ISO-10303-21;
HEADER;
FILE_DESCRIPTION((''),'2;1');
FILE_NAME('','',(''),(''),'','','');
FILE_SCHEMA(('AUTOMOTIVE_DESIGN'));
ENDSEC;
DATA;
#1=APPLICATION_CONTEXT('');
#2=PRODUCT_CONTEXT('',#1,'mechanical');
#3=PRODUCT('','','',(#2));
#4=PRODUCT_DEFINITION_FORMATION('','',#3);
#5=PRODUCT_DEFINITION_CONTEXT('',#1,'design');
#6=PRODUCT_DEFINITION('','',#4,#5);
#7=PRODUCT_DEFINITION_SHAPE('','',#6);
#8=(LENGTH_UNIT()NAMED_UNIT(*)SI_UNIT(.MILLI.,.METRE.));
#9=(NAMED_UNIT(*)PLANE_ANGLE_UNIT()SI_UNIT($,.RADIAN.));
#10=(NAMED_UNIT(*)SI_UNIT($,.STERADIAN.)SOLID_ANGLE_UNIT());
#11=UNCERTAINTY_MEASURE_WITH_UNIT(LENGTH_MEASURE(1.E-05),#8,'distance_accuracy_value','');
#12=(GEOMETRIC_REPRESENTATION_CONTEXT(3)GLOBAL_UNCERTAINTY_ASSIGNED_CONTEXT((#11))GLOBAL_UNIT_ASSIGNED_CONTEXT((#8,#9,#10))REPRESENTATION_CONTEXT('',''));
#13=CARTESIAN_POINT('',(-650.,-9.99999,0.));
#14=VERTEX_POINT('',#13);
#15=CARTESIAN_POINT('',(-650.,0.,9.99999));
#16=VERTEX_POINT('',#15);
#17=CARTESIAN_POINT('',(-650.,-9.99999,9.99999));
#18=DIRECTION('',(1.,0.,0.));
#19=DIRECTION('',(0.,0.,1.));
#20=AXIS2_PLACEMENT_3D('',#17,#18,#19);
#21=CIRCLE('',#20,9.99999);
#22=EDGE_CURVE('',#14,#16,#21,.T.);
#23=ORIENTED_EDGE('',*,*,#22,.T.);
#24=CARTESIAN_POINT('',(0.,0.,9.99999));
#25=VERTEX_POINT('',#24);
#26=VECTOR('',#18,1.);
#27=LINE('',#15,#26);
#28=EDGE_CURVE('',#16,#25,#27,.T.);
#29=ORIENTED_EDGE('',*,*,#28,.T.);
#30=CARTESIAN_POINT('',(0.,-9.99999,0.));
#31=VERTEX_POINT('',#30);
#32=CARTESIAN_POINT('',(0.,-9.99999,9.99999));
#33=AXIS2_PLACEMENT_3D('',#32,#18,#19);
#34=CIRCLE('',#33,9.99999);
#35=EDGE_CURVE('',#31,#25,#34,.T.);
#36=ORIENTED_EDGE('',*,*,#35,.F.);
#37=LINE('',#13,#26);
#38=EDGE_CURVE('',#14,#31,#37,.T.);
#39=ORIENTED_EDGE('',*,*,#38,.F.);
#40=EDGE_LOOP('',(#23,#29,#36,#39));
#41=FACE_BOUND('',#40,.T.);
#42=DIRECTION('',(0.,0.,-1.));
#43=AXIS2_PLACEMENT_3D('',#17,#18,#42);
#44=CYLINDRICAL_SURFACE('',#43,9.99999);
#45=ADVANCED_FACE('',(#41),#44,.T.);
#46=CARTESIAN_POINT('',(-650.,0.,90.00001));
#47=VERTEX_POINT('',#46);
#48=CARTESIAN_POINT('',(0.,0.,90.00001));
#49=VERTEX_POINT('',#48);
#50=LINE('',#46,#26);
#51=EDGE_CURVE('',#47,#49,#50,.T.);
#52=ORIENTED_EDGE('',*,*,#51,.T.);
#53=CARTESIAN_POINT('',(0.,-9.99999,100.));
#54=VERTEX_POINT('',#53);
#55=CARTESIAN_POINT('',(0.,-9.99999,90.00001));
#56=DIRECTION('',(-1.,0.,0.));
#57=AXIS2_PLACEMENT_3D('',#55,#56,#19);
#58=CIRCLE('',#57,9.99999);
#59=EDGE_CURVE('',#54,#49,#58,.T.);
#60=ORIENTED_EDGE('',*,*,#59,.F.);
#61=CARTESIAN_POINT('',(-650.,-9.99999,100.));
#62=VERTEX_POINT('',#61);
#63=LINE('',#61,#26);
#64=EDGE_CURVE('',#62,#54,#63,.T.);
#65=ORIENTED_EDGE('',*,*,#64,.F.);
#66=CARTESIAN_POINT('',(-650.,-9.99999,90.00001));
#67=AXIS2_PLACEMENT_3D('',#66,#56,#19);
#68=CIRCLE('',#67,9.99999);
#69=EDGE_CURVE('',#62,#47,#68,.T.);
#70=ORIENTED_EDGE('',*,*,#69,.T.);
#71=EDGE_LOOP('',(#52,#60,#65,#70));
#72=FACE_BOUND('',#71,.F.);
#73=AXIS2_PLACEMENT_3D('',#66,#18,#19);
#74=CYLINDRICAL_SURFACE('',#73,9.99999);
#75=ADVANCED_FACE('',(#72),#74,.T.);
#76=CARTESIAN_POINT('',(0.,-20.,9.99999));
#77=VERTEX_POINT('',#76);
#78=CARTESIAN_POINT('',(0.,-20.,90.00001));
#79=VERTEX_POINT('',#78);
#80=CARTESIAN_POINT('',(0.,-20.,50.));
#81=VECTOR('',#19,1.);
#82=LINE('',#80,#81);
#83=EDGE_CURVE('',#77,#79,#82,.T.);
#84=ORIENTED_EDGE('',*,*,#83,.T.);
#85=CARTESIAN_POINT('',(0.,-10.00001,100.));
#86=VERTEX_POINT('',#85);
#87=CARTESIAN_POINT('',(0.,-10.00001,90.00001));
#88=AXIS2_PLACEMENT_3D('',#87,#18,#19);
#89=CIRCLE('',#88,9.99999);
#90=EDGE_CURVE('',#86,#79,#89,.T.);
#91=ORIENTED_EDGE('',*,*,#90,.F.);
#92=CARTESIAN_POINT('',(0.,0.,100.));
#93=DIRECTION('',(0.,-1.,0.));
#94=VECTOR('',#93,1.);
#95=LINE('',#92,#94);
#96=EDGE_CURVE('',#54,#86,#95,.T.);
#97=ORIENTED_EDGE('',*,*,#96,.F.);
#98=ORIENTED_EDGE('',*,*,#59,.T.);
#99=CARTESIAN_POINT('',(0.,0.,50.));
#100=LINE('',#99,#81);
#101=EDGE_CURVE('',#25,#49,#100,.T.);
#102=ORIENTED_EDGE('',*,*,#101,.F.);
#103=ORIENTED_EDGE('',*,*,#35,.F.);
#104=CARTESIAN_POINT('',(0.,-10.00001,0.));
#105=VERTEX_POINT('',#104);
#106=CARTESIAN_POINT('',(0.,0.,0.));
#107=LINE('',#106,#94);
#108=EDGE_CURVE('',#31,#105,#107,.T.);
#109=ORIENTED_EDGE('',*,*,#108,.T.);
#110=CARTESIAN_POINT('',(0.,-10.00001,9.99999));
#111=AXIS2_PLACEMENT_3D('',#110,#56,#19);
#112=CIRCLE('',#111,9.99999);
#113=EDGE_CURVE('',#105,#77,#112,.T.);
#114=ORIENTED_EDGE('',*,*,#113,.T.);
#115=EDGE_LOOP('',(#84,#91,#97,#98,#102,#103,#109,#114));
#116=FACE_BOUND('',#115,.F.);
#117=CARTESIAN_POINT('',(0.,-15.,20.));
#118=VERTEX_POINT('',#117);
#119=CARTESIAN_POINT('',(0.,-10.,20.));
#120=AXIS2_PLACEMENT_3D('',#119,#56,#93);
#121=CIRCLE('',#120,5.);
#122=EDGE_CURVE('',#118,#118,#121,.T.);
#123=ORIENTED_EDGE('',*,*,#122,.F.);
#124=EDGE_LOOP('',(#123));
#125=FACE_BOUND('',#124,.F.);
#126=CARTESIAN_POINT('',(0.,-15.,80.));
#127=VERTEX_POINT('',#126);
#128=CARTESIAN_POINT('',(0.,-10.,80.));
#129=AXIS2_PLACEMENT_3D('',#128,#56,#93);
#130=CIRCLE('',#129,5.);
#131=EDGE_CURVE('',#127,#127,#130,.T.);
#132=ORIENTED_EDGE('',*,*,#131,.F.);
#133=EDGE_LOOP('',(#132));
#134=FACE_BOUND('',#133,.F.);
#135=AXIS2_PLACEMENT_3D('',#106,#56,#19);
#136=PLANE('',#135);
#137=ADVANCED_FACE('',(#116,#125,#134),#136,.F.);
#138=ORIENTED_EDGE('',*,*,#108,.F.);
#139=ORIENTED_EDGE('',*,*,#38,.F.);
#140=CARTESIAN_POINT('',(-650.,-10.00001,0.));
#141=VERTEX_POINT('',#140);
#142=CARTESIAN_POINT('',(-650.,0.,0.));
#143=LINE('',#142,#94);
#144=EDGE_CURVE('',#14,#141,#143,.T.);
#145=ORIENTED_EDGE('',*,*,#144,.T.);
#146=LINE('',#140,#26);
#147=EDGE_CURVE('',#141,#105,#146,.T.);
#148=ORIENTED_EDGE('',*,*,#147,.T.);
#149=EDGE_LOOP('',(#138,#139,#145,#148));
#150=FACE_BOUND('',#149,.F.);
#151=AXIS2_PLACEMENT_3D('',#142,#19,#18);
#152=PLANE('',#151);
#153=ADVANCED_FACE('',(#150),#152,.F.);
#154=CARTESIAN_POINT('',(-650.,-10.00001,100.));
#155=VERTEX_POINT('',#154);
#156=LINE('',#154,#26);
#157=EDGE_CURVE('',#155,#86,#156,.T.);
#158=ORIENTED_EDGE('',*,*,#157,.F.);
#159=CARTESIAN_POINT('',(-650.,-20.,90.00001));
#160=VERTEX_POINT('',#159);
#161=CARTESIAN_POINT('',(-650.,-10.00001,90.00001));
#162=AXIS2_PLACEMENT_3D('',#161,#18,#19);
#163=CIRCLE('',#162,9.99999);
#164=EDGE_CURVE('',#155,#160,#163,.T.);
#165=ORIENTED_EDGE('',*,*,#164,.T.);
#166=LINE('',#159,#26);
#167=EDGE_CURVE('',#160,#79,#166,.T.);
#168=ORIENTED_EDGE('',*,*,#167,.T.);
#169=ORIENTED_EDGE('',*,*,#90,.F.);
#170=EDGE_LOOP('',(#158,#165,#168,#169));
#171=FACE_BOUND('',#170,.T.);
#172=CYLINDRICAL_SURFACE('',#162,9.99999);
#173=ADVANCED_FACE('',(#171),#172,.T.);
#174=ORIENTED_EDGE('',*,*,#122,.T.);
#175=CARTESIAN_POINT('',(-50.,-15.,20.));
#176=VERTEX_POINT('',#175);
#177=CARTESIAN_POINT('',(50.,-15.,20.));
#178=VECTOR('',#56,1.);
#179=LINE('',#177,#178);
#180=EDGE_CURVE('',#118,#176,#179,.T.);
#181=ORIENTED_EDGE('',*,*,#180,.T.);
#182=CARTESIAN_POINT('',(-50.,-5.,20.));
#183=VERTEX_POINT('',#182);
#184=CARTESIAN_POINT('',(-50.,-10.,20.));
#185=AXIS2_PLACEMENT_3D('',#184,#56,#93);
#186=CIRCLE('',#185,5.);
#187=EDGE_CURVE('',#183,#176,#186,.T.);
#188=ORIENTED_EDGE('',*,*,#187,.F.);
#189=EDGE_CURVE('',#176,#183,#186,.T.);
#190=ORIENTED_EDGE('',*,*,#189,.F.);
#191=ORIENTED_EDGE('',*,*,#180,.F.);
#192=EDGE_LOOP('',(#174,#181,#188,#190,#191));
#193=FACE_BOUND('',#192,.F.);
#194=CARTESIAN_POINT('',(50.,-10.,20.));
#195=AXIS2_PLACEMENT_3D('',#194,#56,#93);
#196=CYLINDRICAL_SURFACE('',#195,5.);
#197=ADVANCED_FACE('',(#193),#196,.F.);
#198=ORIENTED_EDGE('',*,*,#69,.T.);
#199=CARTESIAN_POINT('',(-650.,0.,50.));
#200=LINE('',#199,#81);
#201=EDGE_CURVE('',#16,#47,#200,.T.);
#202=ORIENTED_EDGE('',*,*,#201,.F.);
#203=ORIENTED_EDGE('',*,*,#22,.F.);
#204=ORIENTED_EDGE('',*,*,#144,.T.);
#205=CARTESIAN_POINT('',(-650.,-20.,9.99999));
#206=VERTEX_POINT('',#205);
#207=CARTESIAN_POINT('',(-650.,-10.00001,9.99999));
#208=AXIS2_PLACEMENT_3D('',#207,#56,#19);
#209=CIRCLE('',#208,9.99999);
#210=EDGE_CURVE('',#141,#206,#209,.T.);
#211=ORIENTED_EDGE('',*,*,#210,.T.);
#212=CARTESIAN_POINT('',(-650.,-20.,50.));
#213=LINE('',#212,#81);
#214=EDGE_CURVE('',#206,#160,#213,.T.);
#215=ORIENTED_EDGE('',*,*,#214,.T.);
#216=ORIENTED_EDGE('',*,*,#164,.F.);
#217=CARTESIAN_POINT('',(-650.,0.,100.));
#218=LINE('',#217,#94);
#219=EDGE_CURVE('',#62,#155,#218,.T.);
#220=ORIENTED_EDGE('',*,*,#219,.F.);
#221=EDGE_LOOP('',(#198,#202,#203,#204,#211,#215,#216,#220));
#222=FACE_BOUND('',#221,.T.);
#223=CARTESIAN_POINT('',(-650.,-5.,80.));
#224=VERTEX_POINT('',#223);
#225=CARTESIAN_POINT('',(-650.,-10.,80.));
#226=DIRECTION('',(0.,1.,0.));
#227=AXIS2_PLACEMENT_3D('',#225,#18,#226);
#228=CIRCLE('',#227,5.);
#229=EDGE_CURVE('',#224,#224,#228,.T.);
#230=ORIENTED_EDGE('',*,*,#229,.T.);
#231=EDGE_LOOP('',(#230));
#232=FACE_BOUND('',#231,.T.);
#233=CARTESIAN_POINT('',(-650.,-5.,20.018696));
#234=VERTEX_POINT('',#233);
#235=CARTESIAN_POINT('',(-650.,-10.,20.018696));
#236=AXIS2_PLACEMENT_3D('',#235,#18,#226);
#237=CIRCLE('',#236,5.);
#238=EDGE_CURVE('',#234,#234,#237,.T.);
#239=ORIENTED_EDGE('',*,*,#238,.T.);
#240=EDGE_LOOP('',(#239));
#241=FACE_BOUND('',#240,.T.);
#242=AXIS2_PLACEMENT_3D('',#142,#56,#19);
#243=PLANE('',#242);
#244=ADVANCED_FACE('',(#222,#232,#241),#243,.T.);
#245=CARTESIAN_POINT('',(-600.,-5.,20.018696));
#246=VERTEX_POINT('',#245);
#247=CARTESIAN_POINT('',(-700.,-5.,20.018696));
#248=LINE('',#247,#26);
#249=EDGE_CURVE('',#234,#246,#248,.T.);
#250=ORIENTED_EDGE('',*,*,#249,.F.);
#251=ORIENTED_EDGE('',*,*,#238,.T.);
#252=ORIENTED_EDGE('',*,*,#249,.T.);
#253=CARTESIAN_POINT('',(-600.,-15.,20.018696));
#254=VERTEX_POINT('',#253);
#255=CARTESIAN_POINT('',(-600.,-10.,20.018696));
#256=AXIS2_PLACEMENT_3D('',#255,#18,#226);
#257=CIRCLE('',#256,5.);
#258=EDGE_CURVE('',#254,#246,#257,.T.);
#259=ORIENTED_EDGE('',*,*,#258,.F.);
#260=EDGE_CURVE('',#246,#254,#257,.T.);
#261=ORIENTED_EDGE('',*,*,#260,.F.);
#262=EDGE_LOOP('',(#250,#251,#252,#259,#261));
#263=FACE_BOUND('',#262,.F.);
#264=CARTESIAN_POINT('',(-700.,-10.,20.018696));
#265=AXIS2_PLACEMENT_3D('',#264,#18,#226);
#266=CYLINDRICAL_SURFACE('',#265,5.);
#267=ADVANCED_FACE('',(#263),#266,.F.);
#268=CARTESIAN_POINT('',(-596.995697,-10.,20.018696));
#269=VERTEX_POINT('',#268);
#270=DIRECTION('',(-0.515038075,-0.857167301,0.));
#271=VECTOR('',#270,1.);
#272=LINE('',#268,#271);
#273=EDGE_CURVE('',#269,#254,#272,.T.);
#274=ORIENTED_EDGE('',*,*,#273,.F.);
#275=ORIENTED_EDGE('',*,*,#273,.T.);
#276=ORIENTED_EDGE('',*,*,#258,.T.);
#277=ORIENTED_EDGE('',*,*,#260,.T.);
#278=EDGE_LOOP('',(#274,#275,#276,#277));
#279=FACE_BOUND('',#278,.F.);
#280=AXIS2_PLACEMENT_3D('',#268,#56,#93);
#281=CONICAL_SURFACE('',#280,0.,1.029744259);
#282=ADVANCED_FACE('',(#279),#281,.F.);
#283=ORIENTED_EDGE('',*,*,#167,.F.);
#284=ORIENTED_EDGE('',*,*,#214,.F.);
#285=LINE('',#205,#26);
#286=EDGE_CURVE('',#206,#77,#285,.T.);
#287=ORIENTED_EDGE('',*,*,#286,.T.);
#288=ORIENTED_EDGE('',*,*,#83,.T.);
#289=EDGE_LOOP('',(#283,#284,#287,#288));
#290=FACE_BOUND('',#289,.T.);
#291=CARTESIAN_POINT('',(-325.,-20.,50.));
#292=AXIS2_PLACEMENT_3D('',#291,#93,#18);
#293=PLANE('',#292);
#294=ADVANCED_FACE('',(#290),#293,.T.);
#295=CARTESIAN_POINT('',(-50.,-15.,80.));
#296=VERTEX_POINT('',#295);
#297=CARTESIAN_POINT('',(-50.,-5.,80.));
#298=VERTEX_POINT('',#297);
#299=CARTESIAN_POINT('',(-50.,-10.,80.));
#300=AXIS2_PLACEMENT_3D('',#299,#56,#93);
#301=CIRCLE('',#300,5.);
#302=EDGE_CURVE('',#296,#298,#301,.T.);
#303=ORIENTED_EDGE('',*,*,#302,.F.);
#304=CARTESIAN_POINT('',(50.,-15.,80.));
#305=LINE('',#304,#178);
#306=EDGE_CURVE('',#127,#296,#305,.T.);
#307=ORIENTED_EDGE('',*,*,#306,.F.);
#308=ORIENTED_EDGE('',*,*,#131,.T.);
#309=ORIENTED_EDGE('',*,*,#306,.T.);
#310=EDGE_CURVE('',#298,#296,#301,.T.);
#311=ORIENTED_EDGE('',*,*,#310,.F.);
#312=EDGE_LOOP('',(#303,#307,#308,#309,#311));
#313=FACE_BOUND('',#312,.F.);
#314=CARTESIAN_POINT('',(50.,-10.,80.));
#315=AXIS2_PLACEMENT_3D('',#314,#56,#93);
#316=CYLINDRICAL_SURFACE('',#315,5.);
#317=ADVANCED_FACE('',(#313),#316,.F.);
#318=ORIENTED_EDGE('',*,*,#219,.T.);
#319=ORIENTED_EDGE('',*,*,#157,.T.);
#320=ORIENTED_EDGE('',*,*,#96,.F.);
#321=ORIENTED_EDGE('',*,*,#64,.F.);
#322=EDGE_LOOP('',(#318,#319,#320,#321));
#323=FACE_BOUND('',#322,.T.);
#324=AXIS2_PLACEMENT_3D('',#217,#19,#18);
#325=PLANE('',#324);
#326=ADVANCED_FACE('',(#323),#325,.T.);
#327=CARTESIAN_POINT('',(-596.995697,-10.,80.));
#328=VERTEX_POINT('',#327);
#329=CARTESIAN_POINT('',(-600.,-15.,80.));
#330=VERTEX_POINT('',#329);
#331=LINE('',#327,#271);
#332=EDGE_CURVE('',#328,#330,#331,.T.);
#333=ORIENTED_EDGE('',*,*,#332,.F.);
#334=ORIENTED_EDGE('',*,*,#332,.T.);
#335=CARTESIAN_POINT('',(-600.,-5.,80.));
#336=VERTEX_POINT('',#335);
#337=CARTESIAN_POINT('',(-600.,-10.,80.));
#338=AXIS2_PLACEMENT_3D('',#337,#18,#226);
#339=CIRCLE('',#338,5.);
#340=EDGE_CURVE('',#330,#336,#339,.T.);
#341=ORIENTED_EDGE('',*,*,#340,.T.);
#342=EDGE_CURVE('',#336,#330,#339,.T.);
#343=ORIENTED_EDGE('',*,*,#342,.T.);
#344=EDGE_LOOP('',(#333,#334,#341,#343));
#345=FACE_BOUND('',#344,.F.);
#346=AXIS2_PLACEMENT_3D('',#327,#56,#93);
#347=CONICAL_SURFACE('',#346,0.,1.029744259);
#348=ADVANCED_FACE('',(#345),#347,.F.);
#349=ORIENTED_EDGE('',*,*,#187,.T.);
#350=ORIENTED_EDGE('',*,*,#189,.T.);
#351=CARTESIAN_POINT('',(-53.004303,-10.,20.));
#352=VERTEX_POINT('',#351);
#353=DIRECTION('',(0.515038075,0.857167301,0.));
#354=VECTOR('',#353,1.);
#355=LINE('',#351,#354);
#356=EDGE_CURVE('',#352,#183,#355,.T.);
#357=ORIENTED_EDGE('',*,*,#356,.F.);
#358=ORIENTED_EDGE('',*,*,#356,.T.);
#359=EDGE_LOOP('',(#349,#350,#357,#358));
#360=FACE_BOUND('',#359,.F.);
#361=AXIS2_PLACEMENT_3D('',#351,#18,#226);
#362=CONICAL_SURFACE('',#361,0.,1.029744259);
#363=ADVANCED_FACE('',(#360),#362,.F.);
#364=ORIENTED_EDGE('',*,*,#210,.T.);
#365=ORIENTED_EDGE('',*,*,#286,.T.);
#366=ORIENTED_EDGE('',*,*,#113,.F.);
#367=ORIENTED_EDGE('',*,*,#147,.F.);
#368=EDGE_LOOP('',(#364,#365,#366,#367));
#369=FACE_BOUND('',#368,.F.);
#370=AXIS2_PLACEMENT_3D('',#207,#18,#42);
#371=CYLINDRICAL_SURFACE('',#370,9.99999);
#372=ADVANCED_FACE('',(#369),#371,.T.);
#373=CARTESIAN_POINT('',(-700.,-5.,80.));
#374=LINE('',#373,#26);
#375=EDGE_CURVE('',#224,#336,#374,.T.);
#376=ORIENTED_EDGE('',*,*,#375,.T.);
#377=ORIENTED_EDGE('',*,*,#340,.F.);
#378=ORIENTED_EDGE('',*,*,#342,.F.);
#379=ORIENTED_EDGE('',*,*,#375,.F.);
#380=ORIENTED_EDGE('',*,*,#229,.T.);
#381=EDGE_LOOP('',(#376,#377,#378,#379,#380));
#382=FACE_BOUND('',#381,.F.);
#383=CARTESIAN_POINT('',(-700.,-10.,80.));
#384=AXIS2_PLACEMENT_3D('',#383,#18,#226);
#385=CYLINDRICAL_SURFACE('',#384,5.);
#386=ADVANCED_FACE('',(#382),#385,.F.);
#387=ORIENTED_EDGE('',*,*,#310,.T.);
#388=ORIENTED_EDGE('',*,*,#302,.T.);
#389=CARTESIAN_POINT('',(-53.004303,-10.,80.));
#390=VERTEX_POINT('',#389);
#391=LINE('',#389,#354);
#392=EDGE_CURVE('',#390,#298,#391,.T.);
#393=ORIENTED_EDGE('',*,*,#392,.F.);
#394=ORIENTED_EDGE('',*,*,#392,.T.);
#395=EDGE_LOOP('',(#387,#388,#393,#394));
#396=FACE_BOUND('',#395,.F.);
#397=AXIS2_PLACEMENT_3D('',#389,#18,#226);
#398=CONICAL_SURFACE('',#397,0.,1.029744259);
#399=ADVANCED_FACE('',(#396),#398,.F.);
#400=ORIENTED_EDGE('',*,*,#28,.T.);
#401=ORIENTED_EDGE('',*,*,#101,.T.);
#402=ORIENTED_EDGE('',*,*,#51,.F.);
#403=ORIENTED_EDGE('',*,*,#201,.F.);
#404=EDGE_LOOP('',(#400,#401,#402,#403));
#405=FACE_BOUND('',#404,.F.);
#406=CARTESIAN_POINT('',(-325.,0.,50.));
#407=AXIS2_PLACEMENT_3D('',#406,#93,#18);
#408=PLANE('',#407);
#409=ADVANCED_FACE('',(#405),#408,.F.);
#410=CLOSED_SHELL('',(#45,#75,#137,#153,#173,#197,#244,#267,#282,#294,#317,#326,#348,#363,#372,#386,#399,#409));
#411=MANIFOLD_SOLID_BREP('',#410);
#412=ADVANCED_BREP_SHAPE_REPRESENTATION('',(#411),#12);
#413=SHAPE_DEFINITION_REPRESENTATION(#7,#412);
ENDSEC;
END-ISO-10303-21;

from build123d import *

# Parameters (mm, degrees)
F0_W     = 650
F0_H     = 100
F1_DEPTH = 20
F2_R     = 9.99999
F4_D     = 10
F4_DEPTH = 50
F4_TIP   = 3.0043030951
F6_D     = 10
F6_DEPTH = 50
F6_TIP   = 3.0043030951


# Not quite as in the source:
# - a fillet or chamfer is up to 0.001 mm smaller than in the source, because OpenCascade refuses the exact size


with BuildPart() as f1:
    # F0 (on Front) → F1 (new body)
    with BuildSketch(Plane.XZ):
        with Locations((-325, 50)):
            Rectangle(F0_W, F0_H)
    extrude(amount=F1_DEPTH)

    # F2 (radius 10 in the source; OpenCascade refuses exactly that, so slightly less here)
    f2_edges = [f1.edges().sort_by_distance(p)[0] for p in [
        (-325, 0, 100),
        (-325, -20, 100),
        (-325, 0, 0),
        (-325, -20, 0),
    ]]
    fillet(f2_edges, radius=F2_R)

    # F4
    with Locations(Plane(origin=(-650, 0, 0), x_dir=(0, -1, 0), z_dir=(-1, 0, 0))):
        with Locations((10, 20.0186959194), (10, 80)):
            Hole(F4_D / 2, depth=F4_DEPTH)
            with Locations((0, 0, -(F4_DEPTH + F4_TIP / 2))):  # 118° drill point
                Cone(0, F4_D / 2, F4_TIP, mode=Mode.SUBTRACT)

    # F6
    with Locations(Plane.YZ):
        with Locations((-10, 80), (-10, 20)):
            Hole(F6_D / 2, depth=F6_DEPTH)
            with Locations((0, 0, -(F6_DEPTH + F6_TIP / 2))):  # 118° drill point
                Cone(0, F6_D / 2, F6_TIP, mode=Mode.SUBTRACT)


solid = f1.part
